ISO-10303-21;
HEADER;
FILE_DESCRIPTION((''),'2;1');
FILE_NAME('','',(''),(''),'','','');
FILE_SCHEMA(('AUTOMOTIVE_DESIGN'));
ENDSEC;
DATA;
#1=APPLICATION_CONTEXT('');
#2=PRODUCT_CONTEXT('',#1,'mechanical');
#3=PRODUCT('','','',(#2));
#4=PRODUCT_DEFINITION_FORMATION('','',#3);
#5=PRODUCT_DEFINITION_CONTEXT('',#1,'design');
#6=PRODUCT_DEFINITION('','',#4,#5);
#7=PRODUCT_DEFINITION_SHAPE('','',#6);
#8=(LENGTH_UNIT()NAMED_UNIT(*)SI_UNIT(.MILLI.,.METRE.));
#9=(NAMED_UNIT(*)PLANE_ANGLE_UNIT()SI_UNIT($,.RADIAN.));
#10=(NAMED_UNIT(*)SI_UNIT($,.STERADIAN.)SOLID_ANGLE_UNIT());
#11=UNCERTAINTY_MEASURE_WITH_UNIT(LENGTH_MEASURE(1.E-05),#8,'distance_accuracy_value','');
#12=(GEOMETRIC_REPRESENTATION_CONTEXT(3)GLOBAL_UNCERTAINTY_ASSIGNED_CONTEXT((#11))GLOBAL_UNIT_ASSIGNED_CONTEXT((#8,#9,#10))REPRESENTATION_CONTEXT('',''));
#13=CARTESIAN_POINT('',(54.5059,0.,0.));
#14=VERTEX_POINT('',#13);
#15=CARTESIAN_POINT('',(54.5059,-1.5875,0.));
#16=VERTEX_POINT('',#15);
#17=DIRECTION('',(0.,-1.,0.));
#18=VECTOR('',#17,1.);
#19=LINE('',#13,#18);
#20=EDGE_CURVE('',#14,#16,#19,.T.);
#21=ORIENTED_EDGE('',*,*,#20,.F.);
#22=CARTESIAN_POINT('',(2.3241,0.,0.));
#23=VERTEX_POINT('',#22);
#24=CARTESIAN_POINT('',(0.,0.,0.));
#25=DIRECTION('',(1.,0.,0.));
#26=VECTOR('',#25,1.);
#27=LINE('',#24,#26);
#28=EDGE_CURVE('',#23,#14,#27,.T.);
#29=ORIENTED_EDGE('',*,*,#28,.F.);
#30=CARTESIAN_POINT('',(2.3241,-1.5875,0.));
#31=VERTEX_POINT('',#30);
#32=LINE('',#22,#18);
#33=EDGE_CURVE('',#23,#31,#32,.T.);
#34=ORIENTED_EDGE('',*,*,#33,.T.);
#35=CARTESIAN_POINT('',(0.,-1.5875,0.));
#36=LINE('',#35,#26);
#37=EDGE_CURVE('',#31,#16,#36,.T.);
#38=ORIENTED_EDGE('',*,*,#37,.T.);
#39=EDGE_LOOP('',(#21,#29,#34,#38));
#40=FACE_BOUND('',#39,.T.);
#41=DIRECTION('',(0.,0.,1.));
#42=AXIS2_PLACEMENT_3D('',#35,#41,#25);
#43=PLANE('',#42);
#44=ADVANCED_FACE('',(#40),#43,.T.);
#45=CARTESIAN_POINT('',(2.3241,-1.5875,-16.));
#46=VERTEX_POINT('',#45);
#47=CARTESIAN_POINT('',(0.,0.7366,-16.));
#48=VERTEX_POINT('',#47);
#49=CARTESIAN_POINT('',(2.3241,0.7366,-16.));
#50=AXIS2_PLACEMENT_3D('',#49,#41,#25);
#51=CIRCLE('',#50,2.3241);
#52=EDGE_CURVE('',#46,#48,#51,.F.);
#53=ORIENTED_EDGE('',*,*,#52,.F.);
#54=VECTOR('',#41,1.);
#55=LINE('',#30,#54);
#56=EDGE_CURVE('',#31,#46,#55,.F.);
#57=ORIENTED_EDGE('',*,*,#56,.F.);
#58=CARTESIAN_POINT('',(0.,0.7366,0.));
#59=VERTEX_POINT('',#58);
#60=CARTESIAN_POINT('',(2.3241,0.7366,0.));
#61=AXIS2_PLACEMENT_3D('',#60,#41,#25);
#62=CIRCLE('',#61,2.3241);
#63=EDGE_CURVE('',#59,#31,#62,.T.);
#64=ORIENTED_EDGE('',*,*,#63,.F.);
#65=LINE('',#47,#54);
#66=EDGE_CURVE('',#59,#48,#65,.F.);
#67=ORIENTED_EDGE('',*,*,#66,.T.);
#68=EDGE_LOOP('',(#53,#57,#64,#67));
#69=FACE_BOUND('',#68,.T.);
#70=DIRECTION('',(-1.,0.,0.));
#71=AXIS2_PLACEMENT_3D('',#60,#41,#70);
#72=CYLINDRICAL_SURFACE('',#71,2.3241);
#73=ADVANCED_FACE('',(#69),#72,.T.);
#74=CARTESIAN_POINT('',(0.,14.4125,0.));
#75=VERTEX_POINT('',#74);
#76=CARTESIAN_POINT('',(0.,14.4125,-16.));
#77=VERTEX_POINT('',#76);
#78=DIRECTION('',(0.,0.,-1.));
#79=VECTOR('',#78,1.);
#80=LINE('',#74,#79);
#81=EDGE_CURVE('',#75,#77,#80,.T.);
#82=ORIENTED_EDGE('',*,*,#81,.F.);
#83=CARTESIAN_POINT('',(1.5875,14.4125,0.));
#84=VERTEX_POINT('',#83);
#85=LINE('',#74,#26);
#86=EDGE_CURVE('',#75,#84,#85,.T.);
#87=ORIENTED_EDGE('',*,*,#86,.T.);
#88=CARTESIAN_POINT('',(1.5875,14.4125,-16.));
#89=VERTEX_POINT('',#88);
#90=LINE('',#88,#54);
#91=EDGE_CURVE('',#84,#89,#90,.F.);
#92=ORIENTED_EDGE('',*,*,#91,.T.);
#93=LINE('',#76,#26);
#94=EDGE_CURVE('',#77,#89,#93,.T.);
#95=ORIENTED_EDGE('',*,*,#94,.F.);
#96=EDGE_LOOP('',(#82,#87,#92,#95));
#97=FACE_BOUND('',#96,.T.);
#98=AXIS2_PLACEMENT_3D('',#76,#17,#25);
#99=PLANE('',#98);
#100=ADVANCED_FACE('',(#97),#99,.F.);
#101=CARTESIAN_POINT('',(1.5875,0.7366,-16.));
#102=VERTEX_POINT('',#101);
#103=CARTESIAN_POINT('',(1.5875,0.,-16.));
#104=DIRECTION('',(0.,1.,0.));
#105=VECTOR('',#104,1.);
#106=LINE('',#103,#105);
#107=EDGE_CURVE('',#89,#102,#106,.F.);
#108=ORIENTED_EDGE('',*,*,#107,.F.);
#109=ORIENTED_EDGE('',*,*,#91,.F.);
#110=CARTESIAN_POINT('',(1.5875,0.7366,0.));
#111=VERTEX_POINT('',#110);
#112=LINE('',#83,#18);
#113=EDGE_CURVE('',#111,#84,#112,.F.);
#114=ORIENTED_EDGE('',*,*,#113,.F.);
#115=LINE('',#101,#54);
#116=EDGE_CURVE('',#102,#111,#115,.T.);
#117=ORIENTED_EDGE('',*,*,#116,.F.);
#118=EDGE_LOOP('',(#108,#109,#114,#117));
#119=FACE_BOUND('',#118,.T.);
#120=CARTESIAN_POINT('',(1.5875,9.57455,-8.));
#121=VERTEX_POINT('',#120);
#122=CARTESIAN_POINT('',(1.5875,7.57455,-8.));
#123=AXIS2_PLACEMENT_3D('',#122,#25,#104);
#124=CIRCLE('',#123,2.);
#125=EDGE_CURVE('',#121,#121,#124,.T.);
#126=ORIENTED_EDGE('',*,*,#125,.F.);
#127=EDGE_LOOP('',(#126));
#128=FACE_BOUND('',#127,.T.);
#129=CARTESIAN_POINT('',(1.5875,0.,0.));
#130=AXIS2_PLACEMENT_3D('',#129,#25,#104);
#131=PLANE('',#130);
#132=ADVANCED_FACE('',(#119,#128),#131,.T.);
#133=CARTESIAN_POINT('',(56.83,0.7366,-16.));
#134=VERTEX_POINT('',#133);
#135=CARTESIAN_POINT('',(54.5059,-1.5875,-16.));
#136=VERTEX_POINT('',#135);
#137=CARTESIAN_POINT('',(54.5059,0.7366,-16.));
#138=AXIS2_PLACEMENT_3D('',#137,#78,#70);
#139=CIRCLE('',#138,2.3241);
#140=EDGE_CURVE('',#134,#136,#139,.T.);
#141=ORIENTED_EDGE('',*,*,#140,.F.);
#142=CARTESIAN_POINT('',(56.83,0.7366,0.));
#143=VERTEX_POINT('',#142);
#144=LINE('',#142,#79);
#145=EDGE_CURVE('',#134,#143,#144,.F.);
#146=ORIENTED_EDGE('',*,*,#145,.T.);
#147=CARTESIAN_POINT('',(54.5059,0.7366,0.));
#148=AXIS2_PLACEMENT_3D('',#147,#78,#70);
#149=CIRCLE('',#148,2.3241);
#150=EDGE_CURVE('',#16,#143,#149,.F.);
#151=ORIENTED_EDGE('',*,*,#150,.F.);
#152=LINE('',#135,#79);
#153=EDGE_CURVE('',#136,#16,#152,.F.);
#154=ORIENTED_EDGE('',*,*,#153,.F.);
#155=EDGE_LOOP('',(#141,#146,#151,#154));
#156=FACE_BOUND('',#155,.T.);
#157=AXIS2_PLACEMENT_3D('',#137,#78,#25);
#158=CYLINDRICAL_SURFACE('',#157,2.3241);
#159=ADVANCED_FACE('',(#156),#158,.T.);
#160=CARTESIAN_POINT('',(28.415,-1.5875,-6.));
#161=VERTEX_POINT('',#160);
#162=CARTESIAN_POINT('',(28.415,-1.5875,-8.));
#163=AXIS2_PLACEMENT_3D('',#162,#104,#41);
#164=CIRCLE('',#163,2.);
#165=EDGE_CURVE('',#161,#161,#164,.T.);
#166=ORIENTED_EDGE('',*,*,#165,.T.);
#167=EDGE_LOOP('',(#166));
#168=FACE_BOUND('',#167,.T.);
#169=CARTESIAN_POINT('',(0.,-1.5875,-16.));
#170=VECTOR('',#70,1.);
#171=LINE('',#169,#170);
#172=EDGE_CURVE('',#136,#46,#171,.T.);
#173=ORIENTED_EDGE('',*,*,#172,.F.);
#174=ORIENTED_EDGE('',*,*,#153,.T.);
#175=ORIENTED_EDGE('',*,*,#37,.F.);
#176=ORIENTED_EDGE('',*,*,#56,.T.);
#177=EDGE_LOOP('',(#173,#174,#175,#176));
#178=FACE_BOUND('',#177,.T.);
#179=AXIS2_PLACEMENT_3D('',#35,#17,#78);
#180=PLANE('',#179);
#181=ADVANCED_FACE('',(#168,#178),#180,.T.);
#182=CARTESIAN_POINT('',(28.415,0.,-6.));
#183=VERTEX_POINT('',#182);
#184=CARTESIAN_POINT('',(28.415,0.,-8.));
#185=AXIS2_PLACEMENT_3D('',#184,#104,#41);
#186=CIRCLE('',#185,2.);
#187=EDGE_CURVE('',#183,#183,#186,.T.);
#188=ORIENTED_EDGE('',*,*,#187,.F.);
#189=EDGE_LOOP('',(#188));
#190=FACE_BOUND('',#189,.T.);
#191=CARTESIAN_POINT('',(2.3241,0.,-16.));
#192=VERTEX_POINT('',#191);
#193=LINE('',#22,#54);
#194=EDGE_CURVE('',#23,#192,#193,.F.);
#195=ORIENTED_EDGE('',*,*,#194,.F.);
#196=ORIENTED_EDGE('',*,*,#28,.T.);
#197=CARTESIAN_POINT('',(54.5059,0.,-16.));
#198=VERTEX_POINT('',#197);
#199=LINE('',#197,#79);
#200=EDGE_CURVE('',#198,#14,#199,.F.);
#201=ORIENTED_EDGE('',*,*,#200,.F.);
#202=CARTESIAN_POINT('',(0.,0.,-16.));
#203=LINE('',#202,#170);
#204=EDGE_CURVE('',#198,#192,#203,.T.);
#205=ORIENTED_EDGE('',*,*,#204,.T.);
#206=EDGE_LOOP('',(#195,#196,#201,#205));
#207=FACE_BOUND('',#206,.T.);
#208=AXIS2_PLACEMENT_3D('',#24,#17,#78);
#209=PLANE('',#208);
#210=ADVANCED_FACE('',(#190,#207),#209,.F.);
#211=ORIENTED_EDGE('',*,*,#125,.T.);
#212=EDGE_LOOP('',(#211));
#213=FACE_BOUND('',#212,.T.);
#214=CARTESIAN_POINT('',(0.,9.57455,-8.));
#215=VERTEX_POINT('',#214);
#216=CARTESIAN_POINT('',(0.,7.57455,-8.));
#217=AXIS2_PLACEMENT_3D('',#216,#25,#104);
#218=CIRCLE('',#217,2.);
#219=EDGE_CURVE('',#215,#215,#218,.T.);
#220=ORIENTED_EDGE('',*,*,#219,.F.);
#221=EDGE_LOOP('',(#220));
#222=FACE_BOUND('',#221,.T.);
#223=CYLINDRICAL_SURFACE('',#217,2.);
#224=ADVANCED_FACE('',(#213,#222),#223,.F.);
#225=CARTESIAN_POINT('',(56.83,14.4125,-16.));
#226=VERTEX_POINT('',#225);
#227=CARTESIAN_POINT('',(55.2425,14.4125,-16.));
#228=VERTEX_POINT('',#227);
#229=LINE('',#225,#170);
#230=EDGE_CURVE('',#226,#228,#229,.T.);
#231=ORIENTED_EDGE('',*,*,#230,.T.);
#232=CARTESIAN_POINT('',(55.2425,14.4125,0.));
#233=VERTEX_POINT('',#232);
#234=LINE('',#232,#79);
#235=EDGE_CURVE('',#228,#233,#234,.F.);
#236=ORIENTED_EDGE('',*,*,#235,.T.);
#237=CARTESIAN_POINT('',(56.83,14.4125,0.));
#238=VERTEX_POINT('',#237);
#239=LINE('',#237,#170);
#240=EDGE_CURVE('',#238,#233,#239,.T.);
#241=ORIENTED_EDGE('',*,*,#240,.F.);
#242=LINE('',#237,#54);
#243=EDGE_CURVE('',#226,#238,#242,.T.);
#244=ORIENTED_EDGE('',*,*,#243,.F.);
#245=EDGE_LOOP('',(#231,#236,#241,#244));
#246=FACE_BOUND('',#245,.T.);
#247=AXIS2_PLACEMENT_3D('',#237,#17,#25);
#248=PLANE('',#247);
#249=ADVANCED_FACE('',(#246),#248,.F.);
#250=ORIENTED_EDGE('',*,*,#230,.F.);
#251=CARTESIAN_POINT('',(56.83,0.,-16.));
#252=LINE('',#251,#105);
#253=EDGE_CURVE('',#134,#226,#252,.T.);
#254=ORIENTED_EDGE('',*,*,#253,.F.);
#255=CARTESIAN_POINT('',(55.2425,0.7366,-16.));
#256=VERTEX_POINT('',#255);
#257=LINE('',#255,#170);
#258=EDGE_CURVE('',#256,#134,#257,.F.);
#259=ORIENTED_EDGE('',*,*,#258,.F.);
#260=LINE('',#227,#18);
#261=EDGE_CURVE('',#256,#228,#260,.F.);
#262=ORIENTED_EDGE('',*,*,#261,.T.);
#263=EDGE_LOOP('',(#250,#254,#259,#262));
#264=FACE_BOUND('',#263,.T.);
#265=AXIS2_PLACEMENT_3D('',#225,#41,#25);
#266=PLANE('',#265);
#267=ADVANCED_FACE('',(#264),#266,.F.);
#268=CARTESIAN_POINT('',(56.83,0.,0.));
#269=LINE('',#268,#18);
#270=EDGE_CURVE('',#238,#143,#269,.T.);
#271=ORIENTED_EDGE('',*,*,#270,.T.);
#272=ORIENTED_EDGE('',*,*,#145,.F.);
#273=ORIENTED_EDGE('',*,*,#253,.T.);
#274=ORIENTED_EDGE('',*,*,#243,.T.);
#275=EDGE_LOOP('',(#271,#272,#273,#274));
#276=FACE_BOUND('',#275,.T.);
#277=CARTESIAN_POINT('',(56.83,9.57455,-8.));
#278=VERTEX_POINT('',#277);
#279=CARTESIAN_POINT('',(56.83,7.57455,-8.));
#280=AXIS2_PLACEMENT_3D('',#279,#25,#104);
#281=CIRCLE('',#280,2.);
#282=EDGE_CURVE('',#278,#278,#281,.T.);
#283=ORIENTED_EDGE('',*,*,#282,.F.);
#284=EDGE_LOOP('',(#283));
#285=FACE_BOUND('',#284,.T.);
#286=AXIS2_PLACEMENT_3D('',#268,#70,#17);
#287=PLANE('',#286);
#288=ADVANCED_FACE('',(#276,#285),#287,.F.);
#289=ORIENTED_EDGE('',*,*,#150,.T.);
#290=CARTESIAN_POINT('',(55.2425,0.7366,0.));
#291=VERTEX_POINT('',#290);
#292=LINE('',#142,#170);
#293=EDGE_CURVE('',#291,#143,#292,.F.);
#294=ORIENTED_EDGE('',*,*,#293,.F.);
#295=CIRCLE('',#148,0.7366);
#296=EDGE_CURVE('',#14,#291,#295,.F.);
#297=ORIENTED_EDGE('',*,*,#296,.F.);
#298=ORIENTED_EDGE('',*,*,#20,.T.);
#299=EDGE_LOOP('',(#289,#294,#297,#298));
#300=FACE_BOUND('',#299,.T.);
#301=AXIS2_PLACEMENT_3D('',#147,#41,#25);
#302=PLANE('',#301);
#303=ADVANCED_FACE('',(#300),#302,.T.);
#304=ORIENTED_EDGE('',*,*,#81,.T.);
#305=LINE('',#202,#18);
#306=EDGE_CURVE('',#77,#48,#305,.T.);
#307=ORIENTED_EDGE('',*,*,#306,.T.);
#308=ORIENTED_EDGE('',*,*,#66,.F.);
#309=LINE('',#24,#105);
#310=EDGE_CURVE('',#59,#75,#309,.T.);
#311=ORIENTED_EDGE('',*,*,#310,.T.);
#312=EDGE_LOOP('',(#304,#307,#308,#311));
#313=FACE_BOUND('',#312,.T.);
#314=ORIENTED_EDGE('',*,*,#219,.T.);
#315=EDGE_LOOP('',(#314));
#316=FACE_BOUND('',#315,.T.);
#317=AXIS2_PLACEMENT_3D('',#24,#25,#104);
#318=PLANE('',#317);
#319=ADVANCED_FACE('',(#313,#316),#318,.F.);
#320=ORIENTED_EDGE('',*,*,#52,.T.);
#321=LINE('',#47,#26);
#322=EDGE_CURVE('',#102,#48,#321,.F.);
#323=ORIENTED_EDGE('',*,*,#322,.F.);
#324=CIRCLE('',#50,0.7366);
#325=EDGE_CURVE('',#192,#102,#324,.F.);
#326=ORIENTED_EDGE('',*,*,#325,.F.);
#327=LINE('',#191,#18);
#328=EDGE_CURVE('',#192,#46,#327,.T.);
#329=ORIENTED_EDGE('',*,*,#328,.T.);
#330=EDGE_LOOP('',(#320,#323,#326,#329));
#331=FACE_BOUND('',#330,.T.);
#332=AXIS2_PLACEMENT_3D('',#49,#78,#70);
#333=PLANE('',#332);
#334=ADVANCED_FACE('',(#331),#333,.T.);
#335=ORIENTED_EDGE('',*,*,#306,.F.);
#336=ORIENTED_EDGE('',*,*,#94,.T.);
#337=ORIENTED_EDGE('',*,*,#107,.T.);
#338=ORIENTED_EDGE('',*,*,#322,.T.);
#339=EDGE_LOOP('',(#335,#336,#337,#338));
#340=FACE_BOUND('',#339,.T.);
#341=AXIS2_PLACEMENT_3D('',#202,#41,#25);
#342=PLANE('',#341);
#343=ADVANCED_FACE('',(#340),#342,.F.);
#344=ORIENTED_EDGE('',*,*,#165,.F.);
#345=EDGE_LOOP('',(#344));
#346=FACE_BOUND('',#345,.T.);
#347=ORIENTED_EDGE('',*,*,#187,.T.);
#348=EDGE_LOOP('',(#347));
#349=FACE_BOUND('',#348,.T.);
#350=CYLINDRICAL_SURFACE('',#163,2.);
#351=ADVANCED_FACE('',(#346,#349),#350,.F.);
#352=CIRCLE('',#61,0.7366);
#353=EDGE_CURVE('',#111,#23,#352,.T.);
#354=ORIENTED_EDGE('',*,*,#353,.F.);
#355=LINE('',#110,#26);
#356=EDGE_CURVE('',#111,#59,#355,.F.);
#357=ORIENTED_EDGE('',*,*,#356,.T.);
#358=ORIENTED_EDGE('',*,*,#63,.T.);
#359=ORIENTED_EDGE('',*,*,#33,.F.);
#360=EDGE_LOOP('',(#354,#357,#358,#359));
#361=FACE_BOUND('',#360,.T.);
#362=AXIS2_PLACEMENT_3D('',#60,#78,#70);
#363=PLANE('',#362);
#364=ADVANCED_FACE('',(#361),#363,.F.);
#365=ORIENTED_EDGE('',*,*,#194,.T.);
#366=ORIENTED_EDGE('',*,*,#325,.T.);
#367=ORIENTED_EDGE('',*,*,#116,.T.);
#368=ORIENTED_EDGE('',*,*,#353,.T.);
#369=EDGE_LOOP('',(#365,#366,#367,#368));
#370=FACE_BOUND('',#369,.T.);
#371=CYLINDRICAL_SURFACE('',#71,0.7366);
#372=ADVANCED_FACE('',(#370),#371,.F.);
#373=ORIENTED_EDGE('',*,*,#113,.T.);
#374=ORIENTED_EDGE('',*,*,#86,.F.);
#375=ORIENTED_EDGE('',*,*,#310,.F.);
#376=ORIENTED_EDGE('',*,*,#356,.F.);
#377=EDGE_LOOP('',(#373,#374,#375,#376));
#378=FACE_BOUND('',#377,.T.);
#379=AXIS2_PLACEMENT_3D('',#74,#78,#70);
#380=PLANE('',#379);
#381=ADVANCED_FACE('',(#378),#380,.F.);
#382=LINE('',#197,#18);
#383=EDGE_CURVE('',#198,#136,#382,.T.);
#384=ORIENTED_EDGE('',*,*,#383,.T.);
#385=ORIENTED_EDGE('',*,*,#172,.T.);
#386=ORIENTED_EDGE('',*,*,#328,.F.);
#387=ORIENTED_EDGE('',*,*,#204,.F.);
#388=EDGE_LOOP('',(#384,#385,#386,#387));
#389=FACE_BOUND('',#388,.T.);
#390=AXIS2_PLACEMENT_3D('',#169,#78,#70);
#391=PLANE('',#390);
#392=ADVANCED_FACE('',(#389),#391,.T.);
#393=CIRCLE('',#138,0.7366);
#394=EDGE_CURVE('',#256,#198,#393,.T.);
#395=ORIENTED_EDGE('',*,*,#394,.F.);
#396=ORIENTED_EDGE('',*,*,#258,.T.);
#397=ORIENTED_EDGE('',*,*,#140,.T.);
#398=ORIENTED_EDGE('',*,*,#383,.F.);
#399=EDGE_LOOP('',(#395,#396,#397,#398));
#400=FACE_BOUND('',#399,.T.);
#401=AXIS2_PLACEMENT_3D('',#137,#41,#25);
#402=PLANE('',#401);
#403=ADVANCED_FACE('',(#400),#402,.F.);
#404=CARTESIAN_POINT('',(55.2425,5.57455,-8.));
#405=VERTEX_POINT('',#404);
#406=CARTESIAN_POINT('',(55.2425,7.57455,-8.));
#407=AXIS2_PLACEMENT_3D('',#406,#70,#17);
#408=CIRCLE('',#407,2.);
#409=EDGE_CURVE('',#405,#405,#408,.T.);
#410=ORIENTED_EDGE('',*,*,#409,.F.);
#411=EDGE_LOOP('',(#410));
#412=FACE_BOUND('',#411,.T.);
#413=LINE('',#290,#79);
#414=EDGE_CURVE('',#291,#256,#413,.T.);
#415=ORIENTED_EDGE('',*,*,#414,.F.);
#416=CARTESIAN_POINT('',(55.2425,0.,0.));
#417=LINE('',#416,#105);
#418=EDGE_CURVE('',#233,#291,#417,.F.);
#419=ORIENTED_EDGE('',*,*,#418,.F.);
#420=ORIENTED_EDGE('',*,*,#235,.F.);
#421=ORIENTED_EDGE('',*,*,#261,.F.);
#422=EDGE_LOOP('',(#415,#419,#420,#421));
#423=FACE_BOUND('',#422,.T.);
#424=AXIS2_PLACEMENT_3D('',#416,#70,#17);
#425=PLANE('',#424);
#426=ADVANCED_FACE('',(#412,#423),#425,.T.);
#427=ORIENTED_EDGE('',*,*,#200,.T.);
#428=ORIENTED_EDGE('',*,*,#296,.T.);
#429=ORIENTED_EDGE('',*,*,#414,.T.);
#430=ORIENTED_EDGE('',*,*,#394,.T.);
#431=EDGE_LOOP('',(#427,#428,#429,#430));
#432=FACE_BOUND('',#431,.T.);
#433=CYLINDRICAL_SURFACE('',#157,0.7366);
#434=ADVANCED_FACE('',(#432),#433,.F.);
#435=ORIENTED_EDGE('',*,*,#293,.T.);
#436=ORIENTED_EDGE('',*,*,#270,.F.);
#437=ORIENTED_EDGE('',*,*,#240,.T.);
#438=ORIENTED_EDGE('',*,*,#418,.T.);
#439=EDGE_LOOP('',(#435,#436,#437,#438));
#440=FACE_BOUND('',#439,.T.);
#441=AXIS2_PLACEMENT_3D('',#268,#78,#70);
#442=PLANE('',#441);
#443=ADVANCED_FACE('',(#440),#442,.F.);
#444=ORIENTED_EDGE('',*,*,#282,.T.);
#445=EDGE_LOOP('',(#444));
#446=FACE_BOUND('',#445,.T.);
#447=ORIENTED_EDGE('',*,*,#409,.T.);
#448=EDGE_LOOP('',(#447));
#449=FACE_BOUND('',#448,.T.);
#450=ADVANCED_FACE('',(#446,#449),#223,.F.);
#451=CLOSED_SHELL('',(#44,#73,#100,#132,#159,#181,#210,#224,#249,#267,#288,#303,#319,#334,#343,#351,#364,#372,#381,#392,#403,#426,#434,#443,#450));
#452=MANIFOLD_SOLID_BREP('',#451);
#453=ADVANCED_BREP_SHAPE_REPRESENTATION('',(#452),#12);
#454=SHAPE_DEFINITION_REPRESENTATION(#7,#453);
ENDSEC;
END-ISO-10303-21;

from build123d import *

# Parameters (mm, degrees)
SKETCH1_W                      = 56.83
SKETCH1_H                      = 16
SKETCH1_R                      = 2
BASE_FLANGE1_DEPTH             = 1.5875
EDGE_FLANGE1_STRIP_W           = 7.8232
EDGE_FLANGE1_STRIP_H           = 1.5875
EDGE_FLANGE1_STRIP_CUT_DEPTH   = 16
EDGE_FLANGE1_STRIP_2_W         = 7.8232
EDGE_FLANGE1_STRIP_2_H         = 1.5875
EDGE_FLANGE1_STRIP_CUT_2_DEPTH = 16
EDGE_FLANGE1_DEPTH             = 16
EDGE_FLANGE1_BEND_DEPTH        = 16
SKETCH12_R                     = 2
CUT_EXTRUDE1_DEPTH             = 61.773094839


# Sheet-metal steps are written as plain solids
with BuildPart() as part:
    # Sketch1 → Base-Flange1 (new body)
    with BuildSketch(Plane(origin=(0, 0, 0), x_dir=(1, 0, 0), z_dir=(0, 1, 0))):
        with Locations((28.415, 8)):
            Rectangle(SKETCH1_W, SKETCH1_H)
        with Locations(Location((28.415, 8, 0), (0, 0, 270))):
            Circle(SKETCH1_R, mode=Mode.SUBTRACT)
    extrude(amount=-BASE_FLANGE1_DEPTH)

    # Edge-Flange1 strip (across the edge) → Edge-Flange1 strip cut (cut)
    with BuildSketch(Plane(origin=(56.83, 0, 0), x_dir=(-1, 0, 0), z_dir=(0, 0, -1))):
        with Locations((-1.5875, -0.79375)):
            Rectangle(EDGE_FLANGE1_STRIP_W, EDGE_FLANGE1_STRIP_H)
    extrude(amount=EDGE_FLANGE1_STRIP_CUT_DEPTH, mode=Mode.SUBTRACT)

    # Edge-Flange1 strip 2 (across the edge) → Edge-Flange1 strip cut 2 (cut)
    with BuildSketch(Plane.XY.offset(-16)):
        with Locations((-1.5875, -0.79375)):
            Rectangle(EDGE_FLANGE1_STRIP_2_W, EDGE_FLANGE1_STRIP_2_H)
    extrude(amount=EDGE_FLANGE1_STRIP_CUT_2_DEPTH, mode=Mode.SUBTRACT)

    # Edge-Flange1 section (across the edge) → Edge-Flange1 (add)
    with BuildSketch(Plane(origin=(56.83, 0, 0), x_dir=(-1, 0, 0), z_dir=(0, 0, -1))):
        with BuildLine():
            Line((0, 0.7366), (0, 14.4125))
            Line((0, 14.4125), (1.5875, 14.4125))
            Line((1.5875, 14.4125), (1.5875, 0.7366))
            ThreePointArc((1.5875, 0.7366), (1.803245145, 0.215745145), (2.3241, 0))
            Line((2.3241, 0), (2.3241, -1.5875))
            ThreePointArc((2.3241, -1.5875), (0.68071313, -0.90678687), (0, 0.7366))
        make_face()
    extrude(amount=EDGE_FLANGE1_DEPTH)

    # Edge-Flange1 section 2 (across the edge) → Edge-Flange1 bend (add)
    with BuildSketch(Plane.XY.offset(-16)):
        with BuildLine():
            Line((0, 0.7366), (0, 14.4125))
            Line((0, 14.4125), (1.5875, 14.4125))
            Line((1.5875, 14.4125), (1.5875, 0.7366))
            ThreePointArc((1.5875, 0.7366), (1.803245145, 0.215745145), (2.3241, 0))
            Line((2.3241, 0), (2.3241, -1.5875))
            ThreePointArc((2.3241, -1.5875), (0.68071313, -0.90678687), (0, 0.7366))
        make_face()
    extrude(amount=EDGE_FLANGE1_BEND_DEPTH)

    # Sketch12 → Cut-Extrude1 (cut, through all)
    with BuildSketch(Plane(origin=(56.83, 0, 0), x_dir=(0, 0, -1), z_dir=(1, 0, 0))):
        with Locations(Location((8, 7.57455, 0), (0, 0, 90))):
            Circle(SKETCH12_R)
    extrude(amount=-CUT_EXTRUDE1_DEPTH, mode=Mode.SUBTRACT)


solid = part.part
